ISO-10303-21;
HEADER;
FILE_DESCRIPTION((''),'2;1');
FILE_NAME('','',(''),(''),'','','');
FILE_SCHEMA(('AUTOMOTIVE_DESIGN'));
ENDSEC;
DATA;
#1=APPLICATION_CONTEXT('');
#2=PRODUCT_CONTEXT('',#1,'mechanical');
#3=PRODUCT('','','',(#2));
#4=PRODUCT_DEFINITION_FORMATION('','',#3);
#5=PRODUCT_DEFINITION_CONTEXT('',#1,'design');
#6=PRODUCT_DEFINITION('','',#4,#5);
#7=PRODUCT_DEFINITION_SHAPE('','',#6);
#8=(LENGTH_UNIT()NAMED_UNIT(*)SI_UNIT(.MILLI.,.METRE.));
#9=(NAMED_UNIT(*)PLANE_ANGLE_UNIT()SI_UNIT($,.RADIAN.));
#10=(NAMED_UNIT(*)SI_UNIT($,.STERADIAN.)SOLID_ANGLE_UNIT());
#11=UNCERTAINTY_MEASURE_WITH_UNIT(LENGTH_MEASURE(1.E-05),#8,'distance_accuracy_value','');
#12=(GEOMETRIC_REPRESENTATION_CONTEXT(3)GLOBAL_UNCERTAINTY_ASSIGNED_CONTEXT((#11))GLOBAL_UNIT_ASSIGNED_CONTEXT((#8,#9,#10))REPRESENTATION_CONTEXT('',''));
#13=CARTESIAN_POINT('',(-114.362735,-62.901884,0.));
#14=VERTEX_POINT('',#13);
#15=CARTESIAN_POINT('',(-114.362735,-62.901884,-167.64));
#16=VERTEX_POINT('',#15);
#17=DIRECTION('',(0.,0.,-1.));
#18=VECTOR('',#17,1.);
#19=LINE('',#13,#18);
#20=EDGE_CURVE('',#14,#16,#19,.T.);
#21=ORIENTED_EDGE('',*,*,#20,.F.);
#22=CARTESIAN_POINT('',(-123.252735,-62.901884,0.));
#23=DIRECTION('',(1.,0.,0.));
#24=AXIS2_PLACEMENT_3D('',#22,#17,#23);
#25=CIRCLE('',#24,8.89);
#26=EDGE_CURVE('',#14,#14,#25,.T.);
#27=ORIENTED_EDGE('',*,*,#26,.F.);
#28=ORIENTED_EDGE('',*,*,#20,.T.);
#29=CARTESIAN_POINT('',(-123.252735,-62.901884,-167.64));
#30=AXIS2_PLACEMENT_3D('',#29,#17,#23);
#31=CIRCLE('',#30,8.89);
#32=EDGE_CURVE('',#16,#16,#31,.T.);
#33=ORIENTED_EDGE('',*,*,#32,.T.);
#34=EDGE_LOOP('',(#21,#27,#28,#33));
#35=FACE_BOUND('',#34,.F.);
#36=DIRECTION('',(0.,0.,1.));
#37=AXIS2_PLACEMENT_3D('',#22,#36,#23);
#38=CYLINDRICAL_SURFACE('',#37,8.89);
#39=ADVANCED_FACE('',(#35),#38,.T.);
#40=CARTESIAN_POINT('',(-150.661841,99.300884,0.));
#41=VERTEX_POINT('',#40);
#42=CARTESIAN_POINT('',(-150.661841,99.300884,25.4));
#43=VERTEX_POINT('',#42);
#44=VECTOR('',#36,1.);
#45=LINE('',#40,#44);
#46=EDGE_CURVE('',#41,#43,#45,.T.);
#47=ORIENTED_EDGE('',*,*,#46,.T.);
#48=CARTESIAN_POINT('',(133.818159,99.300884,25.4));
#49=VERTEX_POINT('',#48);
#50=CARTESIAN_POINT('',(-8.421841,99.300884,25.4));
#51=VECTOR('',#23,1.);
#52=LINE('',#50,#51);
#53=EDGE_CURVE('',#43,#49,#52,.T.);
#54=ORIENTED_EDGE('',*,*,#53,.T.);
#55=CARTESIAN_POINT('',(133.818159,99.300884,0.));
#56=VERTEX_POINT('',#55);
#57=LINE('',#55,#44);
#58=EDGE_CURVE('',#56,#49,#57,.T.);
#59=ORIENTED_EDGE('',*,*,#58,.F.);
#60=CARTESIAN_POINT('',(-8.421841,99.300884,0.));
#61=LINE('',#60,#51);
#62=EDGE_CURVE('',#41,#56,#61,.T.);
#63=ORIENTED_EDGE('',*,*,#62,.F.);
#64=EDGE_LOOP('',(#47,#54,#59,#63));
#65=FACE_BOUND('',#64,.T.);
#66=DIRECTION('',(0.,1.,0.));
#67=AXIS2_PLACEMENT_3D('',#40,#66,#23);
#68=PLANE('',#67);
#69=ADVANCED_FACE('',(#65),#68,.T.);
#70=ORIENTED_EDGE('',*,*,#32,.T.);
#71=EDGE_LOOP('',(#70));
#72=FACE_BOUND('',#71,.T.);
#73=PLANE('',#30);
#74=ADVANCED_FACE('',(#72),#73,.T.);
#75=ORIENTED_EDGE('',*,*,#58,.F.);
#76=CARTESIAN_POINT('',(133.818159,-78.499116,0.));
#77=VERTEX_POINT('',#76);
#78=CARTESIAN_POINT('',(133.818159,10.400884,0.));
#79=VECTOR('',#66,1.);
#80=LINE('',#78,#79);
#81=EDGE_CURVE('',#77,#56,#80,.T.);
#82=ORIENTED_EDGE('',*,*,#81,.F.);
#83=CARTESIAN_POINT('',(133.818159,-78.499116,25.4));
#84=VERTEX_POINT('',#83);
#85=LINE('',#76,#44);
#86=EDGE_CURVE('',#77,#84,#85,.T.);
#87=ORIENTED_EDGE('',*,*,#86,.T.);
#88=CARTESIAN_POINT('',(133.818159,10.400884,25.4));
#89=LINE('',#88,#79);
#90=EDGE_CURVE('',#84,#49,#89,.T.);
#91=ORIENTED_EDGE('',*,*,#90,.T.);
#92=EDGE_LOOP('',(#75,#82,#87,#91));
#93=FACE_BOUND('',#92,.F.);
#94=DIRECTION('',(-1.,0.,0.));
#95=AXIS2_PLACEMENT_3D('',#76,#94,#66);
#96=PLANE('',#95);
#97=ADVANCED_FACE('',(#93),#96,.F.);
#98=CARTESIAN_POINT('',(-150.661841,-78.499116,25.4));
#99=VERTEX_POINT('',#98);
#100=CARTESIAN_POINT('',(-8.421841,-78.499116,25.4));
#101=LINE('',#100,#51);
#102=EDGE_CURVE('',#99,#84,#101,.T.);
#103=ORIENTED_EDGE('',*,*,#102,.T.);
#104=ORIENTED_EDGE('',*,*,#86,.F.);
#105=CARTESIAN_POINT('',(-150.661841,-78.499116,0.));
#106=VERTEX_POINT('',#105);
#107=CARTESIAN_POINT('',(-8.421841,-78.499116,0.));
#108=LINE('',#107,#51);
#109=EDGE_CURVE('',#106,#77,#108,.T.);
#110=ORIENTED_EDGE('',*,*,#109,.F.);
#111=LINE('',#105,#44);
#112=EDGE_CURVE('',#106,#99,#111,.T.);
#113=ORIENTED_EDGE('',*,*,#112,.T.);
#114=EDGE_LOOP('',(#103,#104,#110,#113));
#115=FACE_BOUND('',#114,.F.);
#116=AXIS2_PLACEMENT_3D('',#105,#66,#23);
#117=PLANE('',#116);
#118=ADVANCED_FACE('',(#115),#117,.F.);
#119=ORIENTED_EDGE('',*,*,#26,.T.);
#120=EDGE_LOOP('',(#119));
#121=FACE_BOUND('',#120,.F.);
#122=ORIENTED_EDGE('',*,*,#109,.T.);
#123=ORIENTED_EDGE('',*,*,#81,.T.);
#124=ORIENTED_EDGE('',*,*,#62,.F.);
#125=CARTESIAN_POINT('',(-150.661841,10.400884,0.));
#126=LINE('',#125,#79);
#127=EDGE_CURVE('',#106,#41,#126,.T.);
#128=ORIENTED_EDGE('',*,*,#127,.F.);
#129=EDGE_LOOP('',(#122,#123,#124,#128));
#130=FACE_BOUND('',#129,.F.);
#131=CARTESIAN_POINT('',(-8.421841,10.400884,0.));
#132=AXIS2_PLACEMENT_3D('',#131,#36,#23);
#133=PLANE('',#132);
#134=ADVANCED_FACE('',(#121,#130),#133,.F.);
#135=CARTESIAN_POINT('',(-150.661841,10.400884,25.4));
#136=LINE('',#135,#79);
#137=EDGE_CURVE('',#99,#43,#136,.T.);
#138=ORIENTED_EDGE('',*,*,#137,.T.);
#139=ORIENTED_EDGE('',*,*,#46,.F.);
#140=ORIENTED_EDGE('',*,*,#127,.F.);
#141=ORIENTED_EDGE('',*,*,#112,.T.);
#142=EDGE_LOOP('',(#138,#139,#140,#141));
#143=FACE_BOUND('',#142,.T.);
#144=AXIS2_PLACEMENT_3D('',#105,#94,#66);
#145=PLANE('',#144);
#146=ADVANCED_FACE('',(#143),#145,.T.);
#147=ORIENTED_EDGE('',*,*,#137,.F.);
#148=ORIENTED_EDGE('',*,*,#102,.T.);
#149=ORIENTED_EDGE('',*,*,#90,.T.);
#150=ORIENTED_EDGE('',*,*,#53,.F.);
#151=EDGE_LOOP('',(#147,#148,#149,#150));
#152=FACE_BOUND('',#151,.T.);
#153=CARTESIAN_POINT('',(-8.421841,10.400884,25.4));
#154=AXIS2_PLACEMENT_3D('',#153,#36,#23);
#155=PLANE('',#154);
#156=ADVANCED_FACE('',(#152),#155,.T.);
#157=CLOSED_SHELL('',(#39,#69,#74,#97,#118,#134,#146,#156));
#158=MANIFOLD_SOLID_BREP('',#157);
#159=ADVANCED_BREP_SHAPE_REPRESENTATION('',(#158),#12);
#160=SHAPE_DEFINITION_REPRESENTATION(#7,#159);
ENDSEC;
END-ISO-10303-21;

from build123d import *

# Parameters (mm, degrees)
F0_W     = 284.48
F0_H     = 177.8
F1_DEPTH = 25.4
F2_R     = 8.89
F3_DEPTH = 167.64


# Not quite as in the source:
# - the program builds the solid bodies; features that only make, move or delete a surface that nothing else refers to are left out


with BuildPart() as f1:
    # F0 (on Top) → F1 (new body)
    with BuildSketch(Plane.XY):
        with Locations((-8.4218410349, 10.4008839965)):
            Rectangle(F0_W, F0_H)
    extrude(amount=F1_DEPTH)

    # F2 (on face) → F3 (join)
    with BuildSketch(Plane(origin=(0, 0, 0), x_dir=(1, 0, 0), z_dir=(0, 0, -1))):
        with Locations((-123.2527345419, 62.9018843174)):
            Circle(F2_R)
    extrude(amount=F3_DEPTH)


solid = f1.part
